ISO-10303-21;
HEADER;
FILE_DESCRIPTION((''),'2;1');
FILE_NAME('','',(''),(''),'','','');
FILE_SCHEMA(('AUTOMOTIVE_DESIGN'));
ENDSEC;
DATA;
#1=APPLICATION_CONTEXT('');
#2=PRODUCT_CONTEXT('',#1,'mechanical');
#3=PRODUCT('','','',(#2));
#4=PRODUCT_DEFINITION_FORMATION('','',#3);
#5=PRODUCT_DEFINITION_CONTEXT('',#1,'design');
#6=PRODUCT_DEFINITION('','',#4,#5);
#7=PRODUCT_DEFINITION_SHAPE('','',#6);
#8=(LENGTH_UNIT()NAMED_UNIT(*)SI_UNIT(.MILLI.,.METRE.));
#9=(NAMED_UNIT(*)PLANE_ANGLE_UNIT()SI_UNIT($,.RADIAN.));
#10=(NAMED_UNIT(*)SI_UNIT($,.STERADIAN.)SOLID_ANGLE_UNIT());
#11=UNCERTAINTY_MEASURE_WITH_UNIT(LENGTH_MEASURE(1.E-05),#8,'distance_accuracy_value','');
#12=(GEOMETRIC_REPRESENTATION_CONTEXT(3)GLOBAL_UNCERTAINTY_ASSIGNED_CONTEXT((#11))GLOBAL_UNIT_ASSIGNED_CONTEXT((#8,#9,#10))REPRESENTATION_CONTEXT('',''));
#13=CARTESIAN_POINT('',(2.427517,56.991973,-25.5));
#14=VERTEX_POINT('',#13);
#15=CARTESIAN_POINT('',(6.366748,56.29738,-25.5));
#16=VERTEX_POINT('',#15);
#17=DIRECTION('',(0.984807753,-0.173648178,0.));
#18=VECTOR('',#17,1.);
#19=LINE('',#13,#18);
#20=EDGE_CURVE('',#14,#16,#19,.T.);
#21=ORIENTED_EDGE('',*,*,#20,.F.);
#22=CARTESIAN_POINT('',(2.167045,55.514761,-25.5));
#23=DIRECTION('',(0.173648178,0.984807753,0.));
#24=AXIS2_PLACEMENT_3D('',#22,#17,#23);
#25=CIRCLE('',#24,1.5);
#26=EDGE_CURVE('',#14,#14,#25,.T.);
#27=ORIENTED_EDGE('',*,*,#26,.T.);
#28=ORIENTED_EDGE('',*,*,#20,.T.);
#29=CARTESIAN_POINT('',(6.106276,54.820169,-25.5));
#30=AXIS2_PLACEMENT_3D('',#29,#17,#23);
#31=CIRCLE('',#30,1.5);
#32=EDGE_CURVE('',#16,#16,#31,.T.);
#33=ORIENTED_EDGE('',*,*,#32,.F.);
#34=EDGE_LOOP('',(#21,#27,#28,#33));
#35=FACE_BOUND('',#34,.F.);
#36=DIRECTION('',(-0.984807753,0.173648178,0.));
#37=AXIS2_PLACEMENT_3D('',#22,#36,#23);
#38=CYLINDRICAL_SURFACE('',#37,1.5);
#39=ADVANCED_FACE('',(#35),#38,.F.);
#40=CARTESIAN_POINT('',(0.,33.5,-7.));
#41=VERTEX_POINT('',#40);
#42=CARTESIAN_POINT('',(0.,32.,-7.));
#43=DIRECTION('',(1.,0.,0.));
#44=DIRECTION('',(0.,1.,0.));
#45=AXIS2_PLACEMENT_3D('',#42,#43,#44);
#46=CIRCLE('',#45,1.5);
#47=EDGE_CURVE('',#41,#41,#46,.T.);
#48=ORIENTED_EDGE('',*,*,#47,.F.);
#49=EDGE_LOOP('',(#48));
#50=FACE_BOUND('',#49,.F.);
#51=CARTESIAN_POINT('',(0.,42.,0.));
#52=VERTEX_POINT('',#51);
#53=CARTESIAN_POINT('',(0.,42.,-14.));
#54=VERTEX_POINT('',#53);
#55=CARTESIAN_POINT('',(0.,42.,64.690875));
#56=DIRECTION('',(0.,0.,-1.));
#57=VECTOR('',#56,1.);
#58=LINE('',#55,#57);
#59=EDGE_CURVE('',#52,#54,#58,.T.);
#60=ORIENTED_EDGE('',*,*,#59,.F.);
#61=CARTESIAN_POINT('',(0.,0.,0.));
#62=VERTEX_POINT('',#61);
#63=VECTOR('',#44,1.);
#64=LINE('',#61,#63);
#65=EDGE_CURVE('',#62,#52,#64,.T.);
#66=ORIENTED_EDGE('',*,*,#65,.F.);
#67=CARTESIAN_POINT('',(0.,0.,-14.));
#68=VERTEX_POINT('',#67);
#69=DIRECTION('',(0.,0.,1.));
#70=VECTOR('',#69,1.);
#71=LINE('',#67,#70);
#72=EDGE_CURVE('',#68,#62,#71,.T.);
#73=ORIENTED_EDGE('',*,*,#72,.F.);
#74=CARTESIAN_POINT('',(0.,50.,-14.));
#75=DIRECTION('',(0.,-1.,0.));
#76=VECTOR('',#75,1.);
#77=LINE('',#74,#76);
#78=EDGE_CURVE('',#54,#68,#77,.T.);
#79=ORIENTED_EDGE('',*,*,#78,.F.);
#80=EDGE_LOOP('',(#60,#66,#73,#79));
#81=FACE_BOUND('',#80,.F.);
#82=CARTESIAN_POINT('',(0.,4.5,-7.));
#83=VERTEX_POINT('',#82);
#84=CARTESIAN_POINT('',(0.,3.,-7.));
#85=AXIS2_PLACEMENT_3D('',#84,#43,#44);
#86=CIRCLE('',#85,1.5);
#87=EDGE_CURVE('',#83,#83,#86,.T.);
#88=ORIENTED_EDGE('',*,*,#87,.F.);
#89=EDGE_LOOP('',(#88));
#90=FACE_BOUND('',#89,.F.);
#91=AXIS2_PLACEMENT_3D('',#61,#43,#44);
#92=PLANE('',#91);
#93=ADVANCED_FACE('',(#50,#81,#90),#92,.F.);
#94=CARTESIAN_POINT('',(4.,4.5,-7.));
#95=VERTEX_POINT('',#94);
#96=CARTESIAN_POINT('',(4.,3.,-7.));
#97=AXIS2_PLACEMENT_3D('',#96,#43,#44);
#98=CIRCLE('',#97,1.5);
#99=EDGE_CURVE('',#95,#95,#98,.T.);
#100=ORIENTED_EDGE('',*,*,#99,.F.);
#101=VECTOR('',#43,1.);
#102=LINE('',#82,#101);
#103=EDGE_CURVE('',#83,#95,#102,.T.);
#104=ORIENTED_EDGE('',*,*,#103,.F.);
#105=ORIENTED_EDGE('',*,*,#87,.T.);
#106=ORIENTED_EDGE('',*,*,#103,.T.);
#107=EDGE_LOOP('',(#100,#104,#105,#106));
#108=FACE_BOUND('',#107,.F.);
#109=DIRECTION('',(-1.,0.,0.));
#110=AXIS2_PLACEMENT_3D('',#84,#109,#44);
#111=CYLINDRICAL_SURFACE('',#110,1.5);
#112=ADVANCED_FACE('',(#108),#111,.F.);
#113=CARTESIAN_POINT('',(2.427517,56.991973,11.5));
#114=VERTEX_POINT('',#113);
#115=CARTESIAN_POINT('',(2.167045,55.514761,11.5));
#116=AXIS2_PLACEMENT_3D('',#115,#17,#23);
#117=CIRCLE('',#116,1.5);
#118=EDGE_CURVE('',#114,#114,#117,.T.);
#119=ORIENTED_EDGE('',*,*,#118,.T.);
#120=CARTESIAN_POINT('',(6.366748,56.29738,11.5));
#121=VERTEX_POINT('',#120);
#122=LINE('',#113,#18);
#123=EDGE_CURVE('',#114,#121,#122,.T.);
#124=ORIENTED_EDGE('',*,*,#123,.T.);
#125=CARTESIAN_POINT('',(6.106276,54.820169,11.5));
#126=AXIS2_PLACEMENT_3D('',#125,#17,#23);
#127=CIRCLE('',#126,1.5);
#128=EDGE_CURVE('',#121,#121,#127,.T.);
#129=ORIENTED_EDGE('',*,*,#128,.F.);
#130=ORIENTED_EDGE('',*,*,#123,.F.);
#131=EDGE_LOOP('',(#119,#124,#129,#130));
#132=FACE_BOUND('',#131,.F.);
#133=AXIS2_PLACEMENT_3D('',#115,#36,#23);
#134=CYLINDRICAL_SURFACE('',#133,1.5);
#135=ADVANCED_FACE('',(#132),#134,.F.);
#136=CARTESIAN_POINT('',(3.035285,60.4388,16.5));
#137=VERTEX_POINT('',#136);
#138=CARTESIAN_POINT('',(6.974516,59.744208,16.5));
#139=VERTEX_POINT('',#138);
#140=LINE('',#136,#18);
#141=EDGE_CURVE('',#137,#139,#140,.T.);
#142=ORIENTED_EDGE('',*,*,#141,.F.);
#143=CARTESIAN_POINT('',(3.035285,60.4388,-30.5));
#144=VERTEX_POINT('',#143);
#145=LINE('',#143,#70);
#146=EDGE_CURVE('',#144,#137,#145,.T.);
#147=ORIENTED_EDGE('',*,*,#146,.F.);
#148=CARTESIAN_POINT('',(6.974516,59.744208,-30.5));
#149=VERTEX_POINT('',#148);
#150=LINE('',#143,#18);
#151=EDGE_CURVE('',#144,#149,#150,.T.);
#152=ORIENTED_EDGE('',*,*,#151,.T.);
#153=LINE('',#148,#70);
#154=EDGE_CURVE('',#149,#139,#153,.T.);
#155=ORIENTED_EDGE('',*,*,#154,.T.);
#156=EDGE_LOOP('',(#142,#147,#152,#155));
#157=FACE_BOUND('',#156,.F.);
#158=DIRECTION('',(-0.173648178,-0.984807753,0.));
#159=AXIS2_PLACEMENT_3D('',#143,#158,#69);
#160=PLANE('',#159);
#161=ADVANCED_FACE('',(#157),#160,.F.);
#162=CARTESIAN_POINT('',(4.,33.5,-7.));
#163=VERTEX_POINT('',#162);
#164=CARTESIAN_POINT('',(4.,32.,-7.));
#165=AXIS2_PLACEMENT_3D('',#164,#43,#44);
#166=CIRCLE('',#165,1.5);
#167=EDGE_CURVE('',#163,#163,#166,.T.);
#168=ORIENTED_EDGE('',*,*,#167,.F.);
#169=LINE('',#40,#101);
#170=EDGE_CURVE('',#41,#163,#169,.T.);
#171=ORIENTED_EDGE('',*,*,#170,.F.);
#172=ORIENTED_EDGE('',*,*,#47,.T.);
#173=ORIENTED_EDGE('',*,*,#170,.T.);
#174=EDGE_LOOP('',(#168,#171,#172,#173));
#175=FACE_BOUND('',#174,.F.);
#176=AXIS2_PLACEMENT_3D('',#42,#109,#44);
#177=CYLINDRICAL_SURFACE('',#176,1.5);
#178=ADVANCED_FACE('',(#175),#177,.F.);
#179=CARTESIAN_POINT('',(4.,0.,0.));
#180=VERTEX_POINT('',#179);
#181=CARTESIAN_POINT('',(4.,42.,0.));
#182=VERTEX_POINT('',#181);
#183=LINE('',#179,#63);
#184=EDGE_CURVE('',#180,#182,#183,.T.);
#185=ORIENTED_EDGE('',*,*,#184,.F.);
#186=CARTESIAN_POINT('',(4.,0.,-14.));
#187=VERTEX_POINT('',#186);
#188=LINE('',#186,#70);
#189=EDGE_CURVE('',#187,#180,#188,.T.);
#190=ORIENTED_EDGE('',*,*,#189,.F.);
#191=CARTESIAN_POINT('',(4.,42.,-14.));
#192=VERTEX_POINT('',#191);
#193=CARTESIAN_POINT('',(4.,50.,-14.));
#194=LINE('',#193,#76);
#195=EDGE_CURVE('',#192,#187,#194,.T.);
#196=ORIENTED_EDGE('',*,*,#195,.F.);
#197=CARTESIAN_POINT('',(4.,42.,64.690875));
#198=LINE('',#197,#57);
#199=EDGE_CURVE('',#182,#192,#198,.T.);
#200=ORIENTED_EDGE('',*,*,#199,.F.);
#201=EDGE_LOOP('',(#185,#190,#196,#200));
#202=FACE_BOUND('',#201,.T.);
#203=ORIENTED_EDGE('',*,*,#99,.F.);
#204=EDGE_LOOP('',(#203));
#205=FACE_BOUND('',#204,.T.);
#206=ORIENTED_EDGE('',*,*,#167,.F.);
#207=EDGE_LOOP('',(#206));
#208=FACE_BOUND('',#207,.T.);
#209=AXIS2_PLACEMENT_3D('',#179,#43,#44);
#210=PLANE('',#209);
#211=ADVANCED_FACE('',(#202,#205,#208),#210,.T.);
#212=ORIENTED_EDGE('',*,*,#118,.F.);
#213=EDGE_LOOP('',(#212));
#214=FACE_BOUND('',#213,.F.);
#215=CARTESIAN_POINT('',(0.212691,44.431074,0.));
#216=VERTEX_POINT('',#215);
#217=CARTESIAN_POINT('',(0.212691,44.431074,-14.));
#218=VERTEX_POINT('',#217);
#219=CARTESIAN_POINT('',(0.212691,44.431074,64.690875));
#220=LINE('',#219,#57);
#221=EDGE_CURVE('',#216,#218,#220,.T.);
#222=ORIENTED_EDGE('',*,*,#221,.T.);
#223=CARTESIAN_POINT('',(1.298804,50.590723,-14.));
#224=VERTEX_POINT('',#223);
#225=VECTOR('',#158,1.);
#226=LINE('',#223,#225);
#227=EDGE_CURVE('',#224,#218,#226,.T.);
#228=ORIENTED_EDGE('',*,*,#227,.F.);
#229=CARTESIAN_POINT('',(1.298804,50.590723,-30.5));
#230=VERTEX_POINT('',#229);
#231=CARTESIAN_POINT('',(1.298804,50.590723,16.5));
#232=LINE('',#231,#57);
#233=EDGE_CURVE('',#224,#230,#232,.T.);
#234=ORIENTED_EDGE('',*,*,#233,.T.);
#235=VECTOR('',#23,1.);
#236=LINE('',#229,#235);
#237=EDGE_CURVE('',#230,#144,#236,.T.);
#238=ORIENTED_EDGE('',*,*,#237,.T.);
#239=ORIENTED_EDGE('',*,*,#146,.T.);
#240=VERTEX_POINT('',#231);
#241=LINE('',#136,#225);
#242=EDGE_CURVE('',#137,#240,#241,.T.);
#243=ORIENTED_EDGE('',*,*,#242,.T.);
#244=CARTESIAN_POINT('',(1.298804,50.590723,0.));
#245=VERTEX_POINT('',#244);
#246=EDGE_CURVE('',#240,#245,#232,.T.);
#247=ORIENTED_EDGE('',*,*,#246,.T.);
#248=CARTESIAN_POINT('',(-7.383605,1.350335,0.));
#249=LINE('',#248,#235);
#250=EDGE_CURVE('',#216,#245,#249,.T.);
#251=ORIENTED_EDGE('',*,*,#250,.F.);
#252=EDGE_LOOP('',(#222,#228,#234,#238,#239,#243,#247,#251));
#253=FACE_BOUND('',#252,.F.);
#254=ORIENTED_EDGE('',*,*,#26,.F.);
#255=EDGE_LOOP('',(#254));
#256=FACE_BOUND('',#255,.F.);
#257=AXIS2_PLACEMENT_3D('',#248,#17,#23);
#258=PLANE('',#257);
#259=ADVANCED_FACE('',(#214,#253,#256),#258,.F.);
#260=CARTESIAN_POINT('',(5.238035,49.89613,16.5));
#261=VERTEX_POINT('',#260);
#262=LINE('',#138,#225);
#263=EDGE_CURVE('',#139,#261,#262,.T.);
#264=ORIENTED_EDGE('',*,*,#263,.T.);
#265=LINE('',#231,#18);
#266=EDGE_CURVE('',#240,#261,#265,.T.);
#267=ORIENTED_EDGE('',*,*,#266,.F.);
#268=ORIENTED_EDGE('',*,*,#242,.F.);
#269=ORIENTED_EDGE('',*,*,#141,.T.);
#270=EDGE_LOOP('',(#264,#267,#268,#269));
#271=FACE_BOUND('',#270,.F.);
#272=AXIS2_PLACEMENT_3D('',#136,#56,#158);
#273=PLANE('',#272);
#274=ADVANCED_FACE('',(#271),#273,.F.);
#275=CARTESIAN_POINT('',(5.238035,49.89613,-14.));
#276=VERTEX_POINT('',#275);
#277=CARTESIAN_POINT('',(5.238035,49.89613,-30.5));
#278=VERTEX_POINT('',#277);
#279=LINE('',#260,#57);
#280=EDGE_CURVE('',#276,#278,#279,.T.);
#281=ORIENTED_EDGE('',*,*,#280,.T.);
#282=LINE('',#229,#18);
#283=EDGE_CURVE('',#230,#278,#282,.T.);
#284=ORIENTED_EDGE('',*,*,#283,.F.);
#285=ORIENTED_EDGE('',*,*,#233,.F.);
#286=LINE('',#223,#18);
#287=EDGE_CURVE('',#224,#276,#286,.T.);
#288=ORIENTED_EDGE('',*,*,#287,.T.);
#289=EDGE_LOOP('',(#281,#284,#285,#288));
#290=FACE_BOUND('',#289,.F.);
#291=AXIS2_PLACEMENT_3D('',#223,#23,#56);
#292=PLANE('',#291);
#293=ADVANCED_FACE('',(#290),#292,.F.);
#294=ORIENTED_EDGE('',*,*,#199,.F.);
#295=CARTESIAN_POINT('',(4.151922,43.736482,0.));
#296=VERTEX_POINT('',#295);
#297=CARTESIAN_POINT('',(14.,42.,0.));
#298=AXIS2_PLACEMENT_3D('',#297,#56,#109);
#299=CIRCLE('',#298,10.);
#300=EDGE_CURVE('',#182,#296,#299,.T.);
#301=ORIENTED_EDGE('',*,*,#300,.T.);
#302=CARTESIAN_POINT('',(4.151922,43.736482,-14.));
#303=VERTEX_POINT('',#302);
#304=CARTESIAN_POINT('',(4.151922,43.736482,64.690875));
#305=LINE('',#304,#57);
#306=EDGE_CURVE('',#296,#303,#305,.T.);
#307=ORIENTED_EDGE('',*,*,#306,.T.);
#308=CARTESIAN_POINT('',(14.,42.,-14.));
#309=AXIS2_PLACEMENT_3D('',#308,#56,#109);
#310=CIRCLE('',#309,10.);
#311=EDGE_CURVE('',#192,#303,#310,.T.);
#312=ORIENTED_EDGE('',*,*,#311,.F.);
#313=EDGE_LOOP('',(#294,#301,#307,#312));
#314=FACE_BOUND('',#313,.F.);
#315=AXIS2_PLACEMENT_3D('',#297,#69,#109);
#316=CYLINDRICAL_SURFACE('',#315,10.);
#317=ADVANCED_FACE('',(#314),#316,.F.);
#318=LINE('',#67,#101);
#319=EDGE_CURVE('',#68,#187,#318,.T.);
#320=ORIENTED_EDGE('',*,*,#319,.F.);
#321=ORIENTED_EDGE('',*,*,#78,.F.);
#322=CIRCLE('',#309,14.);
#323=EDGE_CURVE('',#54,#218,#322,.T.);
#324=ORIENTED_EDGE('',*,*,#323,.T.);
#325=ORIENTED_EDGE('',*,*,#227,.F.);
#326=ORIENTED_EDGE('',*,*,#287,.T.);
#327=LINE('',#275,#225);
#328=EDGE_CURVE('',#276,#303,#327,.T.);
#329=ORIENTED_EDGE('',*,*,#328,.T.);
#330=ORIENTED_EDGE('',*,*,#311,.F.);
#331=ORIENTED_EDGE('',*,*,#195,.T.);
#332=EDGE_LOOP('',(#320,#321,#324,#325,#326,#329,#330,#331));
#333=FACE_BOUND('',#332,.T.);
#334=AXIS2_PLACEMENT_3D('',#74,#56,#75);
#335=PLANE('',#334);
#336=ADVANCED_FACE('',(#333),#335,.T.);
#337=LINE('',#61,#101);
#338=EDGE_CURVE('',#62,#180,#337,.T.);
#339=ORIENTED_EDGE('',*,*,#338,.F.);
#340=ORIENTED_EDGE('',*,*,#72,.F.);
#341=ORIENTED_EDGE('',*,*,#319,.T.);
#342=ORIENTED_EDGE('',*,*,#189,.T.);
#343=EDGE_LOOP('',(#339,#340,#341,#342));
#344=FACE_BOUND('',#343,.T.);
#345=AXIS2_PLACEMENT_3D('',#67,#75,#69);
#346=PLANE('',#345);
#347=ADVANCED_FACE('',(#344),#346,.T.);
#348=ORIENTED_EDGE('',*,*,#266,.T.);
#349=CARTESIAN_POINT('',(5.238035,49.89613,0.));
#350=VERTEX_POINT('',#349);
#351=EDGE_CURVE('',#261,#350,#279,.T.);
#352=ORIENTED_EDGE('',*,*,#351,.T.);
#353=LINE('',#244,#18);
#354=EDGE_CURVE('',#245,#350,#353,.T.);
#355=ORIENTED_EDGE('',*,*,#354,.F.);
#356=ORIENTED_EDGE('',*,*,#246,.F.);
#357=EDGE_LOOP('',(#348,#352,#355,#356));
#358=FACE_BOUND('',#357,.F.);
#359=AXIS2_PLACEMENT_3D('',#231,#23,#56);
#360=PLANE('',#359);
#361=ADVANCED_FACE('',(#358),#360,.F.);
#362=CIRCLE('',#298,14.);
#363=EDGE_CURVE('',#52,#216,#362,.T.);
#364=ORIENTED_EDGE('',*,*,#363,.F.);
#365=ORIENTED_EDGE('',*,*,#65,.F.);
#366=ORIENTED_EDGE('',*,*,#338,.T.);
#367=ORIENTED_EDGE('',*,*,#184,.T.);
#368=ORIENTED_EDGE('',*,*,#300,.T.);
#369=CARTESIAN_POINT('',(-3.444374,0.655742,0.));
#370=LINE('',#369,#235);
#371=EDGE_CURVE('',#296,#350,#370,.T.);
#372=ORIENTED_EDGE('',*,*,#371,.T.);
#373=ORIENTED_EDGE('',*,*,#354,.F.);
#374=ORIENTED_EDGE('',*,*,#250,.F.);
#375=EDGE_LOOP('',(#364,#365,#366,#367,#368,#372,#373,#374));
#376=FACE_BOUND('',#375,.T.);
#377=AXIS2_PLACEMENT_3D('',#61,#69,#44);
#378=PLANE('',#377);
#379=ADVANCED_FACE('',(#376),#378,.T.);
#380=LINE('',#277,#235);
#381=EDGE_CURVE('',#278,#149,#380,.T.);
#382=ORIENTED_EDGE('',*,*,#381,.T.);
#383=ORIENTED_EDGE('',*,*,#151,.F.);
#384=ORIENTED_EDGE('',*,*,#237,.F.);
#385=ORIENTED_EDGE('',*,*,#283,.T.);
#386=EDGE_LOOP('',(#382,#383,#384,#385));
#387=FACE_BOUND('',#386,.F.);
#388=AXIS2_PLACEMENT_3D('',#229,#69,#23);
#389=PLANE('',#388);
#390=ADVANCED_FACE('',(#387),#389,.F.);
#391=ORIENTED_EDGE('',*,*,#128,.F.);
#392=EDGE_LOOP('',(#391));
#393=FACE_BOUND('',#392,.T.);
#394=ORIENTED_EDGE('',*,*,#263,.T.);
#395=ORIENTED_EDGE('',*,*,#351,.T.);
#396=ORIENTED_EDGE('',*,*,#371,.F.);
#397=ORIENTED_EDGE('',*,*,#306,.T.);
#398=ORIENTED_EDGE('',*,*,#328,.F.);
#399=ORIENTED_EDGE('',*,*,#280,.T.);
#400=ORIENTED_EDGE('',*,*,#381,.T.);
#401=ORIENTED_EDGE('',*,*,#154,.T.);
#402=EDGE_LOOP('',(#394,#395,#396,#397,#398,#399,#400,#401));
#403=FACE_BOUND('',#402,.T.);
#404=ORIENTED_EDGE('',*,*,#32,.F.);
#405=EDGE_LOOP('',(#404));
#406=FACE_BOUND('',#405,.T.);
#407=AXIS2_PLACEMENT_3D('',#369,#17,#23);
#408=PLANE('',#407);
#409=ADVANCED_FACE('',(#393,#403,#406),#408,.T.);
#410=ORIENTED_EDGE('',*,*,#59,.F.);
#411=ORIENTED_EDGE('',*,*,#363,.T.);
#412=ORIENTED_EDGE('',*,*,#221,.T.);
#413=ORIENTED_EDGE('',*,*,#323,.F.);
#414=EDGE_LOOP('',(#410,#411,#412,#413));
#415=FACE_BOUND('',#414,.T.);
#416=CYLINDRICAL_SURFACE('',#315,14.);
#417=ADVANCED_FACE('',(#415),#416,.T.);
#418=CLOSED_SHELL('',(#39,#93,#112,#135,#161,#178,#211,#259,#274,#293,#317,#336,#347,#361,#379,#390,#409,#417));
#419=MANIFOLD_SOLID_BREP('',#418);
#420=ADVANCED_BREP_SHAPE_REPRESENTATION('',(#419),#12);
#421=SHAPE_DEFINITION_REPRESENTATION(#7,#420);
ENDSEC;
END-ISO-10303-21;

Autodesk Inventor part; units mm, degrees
ref_plane "YZ Plane" through (0, 0, 0) normal (1, 0, 0) x (0, 1, 0)
ref_plane "XZ Plane" through (0, 0, 0) normal (0, 1, 0) x (-1, 0, 0)
ref_plane "XY Plane" through (0, 0, 0) normal (0, 0, 1) x (1, 0, 0)
sketch "스케치1" plane through (0, 0, 0) normal (1, 0, 0) x (0, 1, 0)
  line L0 (0, 0) -> (50, 0)
  line L1 (50, 0) -> (50, -14)
  line L2 (50, -14) -> (0, -14)
  line L3 (0, -14) -> (0, 0)
  circle A0 centre (32, -7) radius 1.5
  circle A1 centre (3, -7) radius 1.5
  line L4 (60, 16.5) -> (50, 16.5)
  line L5 (50, 16.5) -> (50, -30.5)
  line L6 (50, -30.5) -> (60, -30.5)
  line L7 (60, -30.5) -> (60, 16.5)
  circle A2 centre (55, 11.5) radius 1.5
  circle A3 centre (55, -25.5) radius 1.5
  point P0 (50, -7)
  dimension "d0" = 50
  dimension "d1" = 14
  dimension "d2" = 3
  dimension "d3" = 3
  dimension "d4" = 29
  dimension "d5" = 7
  dimension "d6" = 7
  dimension "d10" = 3
  dimension "d11" = 10
  dimension "d12" = 47
  dimension "d13" = 3
  dimension "d14" = 3
  dimension "d15" = 37
  dimension "d16" = 5
  dimension "d17" = 5
  dimension "d18" = 5
extrude "돌출2" add sketch "스케치1" along normal blind 4
sketch "스케치2" plane through (4, 0, 0) normal (1, 0, 0) x (0, 0, -1)
  circle A0 centre (7, 3) radius 1.5 projected
  circle A1 centre (7, 32) radius 1.5 projected
  circle A2 centre (25.5, 55) radius 1.5 projected
  circle A3 centre (-11.5, 55) radius 1.5 projected
  line L0 (-16.5, 50) -> (0, 50) projected
  line L1 (0, 50) -> (0, 0) projected
  line L2 (0, 0) -> (14, 0) projected
  line L3 (14, 0) -> (14, 50) projected
  line L4 (14, 50) -> (30.5, 50) projected
  line L5 (30.5, 50) -> (30.5, 60) projected
  line L6 (30.5, 60) -> (-16.5, 60) projected
  line L7 (-16.5, 60) -> (-16.5, 50) projected
  line L8 (0, 50) -> (0, 0) projected
  line L9 (0, 42) -> (14, 42)
  line L10 (14, 0) -> (14, 50) projected
  dimension "d21" = 10
bend part "굽힘1" radius 10 angle 10 line through (4, 42, 0) along (0, 0, -1) centre toward (1, 0, 0) moving side (0, 1, 0) both sides no
properties part number "옆면PSD받침대" material "ABS 플라스틱"
